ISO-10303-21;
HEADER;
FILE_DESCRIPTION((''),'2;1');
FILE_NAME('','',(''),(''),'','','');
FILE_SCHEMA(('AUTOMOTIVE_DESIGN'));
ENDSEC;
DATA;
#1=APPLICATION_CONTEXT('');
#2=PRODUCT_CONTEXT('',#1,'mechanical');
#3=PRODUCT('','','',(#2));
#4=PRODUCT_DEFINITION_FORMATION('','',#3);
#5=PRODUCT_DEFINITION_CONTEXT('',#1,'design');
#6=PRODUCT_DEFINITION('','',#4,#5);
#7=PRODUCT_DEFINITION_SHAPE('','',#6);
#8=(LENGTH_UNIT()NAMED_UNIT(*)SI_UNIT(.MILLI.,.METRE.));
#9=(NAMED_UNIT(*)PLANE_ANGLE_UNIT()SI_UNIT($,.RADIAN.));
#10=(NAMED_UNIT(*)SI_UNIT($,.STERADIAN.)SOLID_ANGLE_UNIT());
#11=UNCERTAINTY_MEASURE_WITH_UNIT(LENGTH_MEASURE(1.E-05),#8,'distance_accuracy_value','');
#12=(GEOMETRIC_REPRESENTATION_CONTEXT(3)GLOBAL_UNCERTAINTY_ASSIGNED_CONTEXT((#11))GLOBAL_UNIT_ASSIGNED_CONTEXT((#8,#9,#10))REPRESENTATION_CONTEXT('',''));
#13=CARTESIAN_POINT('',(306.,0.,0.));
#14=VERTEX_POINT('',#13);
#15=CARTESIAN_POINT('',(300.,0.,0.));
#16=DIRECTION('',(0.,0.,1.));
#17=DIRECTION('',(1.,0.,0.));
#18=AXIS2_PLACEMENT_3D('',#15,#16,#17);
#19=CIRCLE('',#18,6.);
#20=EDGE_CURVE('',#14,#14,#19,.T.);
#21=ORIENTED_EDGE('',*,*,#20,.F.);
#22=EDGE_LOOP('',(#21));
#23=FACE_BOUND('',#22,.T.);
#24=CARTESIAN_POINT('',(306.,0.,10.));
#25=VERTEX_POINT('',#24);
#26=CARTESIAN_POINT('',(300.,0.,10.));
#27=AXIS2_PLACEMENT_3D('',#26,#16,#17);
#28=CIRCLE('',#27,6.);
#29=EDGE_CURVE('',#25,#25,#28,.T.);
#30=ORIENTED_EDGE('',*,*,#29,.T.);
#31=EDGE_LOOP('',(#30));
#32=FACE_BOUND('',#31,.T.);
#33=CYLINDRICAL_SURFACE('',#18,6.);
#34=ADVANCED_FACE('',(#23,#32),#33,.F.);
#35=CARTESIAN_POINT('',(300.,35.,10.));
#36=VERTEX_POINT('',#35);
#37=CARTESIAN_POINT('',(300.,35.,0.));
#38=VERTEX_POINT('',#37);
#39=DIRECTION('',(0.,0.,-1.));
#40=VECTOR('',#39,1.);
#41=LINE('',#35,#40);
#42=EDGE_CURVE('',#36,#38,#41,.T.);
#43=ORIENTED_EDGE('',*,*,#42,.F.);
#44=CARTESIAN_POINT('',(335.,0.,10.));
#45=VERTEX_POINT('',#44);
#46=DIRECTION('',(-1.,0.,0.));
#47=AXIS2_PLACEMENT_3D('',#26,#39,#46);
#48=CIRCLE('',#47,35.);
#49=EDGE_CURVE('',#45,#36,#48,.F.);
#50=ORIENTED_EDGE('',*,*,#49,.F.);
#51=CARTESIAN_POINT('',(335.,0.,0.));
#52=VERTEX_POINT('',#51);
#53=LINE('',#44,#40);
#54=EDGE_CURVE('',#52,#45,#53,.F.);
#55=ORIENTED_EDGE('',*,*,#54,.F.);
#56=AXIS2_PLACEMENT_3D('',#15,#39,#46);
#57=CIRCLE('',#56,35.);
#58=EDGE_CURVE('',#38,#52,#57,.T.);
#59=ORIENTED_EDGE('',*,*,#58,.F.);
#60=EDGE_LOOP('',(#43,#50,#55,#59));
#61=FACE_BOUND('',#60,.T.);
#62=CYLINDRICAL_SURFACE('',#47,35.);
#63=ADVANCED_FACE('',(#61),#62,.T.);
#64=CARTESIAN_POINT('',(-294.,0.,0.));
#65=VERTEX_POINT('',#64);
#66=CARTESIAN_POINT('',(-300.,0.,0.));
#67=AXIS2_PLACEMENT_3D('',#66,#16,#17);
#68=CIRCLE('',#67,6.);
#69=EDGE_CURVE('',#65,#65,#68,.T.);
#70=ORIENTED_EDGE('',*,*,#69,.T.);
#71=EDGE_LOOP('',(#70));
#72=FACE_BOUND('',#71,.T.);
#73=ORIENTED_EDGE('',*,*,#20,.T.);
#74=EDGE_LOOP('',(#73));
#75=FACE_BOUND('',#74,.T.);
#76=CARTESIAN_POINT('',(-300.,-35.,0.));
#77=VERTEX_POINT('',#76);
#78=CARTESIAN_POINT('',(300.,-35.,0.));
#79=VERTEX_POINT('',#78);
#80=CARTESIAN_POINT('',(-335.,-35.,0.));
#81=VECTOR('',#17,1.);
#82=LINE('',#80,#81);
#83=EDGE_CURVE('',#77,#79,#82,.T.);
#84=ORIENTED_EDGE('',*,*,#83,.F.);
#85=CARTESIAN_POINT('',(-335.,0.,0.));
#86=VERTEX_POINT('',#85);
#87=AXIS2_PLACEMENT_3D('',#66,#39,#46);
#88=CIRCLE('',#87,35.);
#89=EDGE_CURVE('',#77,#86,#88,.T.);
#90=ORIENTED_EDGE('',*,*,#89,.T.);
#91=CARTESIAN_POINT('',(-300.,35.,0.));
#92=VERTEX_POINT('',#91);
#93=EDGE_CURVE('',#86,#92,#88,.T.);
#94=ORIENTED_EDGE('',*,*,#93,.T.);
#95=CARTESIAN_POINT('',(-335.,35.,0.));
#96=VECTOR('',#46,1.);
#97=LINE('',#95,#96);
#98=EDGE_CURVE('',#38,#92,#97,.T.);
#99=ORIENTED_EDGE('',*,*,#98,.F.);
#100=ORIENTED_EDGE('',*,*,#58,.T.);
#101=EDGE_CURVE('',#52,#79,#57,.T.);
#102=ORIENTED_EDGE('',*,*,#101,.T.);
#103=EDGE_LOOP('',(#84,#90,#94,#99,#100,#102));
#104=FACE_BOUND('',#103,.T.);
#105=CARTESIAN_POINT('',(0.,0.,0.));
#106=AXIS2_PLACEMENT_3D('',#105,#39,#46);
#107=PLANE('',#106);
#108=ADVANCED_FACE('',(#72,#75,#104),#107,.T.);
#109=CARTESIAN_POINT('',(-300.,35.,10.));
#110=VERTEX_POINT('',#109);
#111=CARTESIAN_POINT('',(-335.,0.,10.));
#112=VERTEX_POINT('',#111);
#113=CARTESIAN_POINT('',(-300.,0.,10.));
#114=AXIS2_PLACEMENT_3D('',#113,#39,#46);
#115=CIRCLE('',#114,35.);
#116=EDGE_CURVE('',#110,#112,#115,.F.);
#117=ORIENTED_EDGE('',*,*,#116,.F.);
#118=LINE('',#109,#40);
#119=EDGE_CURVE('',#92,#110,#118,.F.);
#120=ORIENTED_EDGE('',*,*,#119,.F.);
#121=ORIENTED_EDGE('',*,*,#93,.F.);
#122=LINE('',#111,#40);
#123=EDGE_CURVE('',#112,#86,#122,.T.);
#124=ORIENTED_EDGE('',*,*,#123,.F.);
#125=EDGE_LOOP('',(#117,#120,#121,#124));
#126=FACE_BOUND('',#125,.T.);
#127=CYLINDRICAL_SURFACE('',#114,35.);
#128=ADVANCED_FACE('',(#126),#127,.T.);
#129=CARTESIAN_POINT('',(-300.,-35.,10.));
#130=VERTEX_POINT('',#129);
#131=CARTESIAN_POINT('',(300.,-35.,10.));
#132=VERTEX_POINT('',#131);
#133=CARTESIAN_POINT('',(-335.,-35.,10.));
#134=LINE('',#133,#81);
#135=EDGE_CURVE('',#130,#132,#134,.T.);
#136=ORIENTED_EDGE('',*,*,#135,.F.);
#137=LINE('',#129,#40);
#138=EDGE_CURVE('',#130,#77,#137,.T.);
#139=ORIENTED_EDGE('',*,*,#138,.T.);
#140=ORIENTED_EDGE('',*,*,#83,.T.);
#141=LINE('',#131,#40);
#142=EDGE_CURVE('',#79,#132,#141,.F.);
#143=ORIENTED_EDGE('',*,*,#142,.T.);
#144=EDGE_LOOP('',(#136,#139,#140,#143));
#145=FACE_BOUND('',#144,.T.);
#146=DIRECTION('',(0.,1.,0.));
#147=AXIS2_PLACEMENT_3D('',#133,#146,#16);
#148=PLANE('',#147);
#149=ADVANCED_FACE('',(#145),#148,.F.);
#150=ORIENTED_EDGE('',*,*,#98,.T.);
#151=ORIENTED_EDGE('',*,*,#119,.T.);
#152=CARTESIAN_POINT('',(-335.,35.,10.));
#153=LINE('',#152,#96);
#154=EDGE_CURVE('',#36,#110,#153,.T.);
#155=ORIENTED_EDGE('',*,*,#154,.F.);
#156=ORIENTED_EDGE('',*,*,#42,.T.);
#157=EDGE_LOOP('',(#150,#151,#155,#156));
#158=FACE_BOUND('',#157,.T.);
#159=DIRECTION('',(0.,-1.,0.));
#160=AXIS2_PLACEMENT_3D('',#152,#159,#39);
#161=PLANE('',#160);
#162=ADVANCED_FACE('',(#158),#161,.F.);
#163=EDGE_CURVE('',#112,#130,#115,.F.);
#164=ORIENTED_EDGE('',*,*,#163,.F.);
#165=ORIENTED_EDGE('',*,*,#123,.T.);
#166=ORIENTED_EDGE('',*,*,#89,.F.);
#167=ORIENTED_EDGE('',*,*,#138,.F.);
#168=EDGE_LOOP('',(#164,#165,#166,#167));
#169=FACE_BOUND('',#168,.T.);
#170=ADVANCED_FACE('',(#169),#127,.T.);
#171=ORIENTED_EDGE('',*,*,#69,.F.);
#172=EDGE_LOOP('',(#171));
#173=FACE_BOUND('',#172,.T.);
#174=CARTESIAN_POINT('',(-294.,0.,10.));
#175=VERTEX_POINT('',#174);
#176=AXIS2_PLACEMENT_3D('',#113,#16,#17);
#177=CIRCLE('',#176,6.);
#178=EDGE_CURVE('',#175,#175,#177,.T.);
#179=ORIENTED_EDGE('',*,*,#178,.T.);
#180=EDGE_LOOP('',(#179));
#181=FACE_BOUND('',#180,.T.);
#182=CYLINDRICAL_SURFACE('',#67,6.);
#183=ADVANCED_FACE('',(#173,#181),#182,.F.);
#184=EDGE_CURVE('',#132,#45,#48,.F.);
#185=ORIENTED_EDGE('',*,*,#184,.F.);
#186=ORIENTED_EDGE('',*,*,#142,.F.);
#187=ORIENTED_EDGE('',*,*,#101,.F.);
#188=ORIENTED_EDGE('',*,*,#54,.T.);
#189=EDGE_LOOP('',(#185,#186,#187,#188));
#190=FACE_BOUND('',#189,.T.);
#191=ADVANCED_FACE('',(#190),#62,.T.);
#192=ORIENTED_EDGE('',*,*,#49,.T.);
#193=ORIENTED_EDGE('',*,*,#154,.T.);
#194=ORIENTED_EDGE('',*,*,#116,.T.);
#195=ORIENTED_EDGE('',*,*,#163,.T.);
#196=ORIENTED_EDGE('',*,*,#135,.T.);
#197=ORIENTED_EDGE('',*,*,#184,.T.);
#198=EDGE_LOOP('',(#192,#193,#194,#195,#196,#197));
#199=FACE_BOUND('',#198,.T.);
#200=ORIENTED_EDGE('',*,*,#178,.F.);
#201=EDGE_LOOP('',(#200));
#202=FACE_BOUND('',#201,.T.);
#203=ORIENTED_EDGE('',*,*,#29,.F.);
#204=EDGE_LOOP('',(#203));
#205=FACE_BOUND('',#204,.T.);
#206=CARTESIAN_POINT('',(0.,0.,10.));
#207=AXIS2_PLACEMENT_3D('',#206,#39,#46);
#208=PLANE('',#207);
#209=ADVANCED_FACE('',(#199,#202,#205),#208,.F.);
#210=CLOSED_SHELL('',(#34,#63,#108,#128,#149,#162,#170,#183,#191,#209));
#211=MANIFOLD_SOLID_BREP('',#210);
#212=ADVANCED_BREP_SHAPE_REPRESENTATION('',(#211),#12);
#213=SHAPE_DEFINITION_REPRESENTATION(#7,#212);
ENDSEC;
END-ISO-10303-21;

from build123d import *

# Parameters (mm, degrees)
SKETCH1_W           = 670
SKETCH1_H           = 70
BOSS_EXTRUDE1_DEPTH = 10
SKETCH2_R           = 6
CUT_EXTRUDE1_DEPTH  = 337.97180891
FILLET1_R           = 35


with BuildPart() as part:
    # Sketch1 → Boss-Extrude1 (new body)
    with BuildSketch(Plane.XY):
        Rectangle(SKETCH1_W, SKETCH1_H)
    extrude(amount=BOSS_EXTRUDE1_DEPTH)

    # Sketch2 → Cut-Extrude1 (cut, through all)
    with BuildSketch(Plane.XY.offset(10)):
        with Locations((-300, 0)):
            Circle(SKETCH2_R)
        with Locations((300, 0)):
            Circle(SKETCH2_R)
    extrude(amount=-CUT_EXTRUDE1_DEPTH, mode=Mode.SUBTRACT)

    # Fillet1
    fillet1_edges = [part.edges().sort_by_distance(p)[0] for p in [
        (335, -35, 5),
        (335, 35, 5),
        (-335, -35, 5),
        (-335, 35, 5),
    ]]
    fillet(fillet1_edges, radius=FILLET1_R - 0.0001)  # a hair under: the kernel refuses the full size


solid = part.part
